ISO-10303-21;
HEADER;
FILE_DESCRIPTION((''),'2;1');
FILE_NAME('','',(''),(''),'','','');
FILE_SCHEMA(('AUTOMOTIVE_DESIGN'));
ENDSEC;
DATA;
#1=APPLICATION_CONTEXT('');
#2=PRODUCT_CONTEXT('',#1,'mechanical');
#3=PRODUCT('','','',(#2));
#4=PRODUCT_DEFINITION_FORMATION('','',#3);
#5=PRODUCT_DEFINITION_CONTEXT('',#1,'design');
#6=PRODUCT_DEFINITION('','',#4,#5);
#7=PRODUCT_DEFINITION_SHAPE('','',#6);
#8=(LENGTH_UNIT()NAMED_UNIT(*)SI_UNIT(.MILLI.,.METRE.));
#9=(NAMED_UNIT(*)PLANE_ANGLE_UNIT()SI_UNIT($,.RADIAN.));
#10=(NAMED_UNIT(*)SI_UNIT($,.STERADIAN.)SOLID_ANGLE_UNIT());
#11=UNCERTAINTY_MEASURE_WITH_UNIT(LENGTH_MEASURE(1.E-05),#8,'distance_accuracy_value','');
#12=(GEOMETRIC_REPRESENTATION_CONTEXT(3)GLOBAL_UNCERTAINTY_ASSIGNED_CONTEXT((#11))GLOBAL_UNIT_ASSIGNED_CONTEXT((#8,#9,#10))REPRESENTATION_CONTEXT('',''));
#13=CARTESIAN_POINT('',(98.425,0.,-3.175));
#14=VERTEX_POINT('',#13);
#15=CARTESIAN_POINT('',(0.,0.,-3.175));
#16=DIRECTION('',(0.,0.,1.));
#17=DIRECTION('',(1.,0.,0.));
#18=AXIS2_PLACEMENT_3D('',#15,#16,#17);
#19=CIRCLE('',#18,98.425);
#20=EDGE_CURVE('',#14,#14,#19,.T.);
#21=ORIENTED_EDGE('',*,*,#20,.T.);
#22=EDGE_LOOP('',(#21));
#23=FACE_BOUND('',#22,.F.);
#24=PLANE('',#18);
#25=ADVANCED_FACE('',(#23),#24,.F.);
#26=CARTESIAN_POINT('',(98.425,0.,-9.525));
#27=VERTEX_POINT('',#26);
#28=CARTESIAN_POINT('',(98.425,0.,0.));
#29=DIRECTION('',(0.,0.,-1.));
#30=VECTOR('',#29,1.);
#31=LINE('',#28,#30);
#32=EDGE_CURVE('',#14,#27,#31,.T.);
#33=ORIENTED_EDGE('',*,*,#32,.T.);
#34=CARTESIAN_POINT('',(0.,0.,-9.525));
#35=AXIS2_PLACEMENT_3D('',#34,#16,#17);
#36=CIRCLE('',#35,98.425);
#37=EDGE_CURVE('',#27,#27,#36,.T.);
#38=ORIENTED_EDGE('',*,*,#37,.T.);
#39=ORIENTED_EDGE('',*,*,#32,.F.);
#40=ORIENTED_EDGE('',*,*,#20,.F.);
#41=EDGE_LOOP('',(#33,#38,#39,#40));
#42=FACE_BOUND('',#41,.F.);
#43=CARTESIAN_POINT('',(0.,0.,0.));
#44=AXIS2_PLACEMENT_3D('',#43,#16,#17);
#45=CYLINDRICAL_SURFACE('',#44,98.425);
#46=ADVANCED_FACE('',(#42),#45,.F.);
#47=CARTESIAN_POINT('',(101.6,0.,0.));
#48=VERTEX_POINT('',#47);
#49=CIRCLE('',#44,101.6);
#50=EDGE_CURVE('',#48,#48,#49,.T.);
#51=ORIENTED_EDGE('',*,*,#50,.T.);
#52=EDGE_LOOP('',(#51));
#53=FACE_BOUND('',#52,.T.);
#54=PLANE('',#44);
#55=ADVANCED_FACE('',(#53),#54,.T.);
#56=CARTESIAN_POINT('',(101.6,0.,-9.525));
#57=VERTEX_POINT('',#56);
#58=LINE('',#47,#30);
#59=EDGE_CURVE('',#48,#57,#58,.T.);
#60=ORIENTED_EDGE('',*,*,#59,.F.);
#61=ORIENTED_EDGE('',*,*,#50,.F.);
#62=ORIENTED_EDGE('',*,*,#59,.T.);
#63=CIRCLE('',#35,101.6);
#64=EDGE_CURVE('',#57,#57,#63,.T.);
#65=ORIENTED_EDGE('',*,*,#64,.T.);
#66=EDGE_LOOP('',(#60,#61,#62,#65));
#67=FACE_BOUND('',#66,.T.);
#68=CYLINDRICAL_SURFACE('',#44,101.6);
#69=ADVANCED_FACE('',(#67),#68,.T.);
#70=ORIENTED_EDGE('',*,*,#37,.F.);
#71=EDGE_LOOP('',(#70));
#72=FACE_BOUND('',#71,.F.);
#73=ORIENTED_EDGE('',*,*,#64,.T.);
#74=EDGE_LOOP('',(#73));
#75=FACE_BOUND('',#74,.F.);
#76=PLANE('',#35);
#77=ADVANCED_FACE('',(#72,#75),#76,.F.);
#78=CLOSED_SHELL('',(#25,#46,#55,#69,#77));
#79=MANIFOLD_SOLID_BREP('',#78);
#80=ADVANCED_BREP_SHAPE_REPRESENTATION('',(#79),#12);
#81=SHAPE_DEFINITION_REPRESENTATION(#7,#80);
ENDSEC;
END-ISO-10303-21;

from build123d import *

# Parameters (mm, degrees)
F0_R     = 101.6
F0_R_2   = 98.425
F1_DEPTH = 9.525
F2_R     = 98.425
F3_DEPTH = 3.175


# Not quite as in the source:
# - a length typed as a fraction of an inch, garbled in the dataset ("3 / 203.2 mm" for 3/8 in), is restored


with BuildPart() as f1:
    # F0 (on Top) → F1 (new body)
    with BuildSketch(Plane.XY):
        Circle(F0_R)
        Circle(F0_R_2, mode=Mode.SUBTRACT)
    extrude(amount=-F1_DEPTH)

    # F2 (on Top) → F3 (join)
    with BuildSketch(Plane.XY):
        Circle(F2_R)
    extrude(amount=-F3_DEPTH)


solid = f1.part
